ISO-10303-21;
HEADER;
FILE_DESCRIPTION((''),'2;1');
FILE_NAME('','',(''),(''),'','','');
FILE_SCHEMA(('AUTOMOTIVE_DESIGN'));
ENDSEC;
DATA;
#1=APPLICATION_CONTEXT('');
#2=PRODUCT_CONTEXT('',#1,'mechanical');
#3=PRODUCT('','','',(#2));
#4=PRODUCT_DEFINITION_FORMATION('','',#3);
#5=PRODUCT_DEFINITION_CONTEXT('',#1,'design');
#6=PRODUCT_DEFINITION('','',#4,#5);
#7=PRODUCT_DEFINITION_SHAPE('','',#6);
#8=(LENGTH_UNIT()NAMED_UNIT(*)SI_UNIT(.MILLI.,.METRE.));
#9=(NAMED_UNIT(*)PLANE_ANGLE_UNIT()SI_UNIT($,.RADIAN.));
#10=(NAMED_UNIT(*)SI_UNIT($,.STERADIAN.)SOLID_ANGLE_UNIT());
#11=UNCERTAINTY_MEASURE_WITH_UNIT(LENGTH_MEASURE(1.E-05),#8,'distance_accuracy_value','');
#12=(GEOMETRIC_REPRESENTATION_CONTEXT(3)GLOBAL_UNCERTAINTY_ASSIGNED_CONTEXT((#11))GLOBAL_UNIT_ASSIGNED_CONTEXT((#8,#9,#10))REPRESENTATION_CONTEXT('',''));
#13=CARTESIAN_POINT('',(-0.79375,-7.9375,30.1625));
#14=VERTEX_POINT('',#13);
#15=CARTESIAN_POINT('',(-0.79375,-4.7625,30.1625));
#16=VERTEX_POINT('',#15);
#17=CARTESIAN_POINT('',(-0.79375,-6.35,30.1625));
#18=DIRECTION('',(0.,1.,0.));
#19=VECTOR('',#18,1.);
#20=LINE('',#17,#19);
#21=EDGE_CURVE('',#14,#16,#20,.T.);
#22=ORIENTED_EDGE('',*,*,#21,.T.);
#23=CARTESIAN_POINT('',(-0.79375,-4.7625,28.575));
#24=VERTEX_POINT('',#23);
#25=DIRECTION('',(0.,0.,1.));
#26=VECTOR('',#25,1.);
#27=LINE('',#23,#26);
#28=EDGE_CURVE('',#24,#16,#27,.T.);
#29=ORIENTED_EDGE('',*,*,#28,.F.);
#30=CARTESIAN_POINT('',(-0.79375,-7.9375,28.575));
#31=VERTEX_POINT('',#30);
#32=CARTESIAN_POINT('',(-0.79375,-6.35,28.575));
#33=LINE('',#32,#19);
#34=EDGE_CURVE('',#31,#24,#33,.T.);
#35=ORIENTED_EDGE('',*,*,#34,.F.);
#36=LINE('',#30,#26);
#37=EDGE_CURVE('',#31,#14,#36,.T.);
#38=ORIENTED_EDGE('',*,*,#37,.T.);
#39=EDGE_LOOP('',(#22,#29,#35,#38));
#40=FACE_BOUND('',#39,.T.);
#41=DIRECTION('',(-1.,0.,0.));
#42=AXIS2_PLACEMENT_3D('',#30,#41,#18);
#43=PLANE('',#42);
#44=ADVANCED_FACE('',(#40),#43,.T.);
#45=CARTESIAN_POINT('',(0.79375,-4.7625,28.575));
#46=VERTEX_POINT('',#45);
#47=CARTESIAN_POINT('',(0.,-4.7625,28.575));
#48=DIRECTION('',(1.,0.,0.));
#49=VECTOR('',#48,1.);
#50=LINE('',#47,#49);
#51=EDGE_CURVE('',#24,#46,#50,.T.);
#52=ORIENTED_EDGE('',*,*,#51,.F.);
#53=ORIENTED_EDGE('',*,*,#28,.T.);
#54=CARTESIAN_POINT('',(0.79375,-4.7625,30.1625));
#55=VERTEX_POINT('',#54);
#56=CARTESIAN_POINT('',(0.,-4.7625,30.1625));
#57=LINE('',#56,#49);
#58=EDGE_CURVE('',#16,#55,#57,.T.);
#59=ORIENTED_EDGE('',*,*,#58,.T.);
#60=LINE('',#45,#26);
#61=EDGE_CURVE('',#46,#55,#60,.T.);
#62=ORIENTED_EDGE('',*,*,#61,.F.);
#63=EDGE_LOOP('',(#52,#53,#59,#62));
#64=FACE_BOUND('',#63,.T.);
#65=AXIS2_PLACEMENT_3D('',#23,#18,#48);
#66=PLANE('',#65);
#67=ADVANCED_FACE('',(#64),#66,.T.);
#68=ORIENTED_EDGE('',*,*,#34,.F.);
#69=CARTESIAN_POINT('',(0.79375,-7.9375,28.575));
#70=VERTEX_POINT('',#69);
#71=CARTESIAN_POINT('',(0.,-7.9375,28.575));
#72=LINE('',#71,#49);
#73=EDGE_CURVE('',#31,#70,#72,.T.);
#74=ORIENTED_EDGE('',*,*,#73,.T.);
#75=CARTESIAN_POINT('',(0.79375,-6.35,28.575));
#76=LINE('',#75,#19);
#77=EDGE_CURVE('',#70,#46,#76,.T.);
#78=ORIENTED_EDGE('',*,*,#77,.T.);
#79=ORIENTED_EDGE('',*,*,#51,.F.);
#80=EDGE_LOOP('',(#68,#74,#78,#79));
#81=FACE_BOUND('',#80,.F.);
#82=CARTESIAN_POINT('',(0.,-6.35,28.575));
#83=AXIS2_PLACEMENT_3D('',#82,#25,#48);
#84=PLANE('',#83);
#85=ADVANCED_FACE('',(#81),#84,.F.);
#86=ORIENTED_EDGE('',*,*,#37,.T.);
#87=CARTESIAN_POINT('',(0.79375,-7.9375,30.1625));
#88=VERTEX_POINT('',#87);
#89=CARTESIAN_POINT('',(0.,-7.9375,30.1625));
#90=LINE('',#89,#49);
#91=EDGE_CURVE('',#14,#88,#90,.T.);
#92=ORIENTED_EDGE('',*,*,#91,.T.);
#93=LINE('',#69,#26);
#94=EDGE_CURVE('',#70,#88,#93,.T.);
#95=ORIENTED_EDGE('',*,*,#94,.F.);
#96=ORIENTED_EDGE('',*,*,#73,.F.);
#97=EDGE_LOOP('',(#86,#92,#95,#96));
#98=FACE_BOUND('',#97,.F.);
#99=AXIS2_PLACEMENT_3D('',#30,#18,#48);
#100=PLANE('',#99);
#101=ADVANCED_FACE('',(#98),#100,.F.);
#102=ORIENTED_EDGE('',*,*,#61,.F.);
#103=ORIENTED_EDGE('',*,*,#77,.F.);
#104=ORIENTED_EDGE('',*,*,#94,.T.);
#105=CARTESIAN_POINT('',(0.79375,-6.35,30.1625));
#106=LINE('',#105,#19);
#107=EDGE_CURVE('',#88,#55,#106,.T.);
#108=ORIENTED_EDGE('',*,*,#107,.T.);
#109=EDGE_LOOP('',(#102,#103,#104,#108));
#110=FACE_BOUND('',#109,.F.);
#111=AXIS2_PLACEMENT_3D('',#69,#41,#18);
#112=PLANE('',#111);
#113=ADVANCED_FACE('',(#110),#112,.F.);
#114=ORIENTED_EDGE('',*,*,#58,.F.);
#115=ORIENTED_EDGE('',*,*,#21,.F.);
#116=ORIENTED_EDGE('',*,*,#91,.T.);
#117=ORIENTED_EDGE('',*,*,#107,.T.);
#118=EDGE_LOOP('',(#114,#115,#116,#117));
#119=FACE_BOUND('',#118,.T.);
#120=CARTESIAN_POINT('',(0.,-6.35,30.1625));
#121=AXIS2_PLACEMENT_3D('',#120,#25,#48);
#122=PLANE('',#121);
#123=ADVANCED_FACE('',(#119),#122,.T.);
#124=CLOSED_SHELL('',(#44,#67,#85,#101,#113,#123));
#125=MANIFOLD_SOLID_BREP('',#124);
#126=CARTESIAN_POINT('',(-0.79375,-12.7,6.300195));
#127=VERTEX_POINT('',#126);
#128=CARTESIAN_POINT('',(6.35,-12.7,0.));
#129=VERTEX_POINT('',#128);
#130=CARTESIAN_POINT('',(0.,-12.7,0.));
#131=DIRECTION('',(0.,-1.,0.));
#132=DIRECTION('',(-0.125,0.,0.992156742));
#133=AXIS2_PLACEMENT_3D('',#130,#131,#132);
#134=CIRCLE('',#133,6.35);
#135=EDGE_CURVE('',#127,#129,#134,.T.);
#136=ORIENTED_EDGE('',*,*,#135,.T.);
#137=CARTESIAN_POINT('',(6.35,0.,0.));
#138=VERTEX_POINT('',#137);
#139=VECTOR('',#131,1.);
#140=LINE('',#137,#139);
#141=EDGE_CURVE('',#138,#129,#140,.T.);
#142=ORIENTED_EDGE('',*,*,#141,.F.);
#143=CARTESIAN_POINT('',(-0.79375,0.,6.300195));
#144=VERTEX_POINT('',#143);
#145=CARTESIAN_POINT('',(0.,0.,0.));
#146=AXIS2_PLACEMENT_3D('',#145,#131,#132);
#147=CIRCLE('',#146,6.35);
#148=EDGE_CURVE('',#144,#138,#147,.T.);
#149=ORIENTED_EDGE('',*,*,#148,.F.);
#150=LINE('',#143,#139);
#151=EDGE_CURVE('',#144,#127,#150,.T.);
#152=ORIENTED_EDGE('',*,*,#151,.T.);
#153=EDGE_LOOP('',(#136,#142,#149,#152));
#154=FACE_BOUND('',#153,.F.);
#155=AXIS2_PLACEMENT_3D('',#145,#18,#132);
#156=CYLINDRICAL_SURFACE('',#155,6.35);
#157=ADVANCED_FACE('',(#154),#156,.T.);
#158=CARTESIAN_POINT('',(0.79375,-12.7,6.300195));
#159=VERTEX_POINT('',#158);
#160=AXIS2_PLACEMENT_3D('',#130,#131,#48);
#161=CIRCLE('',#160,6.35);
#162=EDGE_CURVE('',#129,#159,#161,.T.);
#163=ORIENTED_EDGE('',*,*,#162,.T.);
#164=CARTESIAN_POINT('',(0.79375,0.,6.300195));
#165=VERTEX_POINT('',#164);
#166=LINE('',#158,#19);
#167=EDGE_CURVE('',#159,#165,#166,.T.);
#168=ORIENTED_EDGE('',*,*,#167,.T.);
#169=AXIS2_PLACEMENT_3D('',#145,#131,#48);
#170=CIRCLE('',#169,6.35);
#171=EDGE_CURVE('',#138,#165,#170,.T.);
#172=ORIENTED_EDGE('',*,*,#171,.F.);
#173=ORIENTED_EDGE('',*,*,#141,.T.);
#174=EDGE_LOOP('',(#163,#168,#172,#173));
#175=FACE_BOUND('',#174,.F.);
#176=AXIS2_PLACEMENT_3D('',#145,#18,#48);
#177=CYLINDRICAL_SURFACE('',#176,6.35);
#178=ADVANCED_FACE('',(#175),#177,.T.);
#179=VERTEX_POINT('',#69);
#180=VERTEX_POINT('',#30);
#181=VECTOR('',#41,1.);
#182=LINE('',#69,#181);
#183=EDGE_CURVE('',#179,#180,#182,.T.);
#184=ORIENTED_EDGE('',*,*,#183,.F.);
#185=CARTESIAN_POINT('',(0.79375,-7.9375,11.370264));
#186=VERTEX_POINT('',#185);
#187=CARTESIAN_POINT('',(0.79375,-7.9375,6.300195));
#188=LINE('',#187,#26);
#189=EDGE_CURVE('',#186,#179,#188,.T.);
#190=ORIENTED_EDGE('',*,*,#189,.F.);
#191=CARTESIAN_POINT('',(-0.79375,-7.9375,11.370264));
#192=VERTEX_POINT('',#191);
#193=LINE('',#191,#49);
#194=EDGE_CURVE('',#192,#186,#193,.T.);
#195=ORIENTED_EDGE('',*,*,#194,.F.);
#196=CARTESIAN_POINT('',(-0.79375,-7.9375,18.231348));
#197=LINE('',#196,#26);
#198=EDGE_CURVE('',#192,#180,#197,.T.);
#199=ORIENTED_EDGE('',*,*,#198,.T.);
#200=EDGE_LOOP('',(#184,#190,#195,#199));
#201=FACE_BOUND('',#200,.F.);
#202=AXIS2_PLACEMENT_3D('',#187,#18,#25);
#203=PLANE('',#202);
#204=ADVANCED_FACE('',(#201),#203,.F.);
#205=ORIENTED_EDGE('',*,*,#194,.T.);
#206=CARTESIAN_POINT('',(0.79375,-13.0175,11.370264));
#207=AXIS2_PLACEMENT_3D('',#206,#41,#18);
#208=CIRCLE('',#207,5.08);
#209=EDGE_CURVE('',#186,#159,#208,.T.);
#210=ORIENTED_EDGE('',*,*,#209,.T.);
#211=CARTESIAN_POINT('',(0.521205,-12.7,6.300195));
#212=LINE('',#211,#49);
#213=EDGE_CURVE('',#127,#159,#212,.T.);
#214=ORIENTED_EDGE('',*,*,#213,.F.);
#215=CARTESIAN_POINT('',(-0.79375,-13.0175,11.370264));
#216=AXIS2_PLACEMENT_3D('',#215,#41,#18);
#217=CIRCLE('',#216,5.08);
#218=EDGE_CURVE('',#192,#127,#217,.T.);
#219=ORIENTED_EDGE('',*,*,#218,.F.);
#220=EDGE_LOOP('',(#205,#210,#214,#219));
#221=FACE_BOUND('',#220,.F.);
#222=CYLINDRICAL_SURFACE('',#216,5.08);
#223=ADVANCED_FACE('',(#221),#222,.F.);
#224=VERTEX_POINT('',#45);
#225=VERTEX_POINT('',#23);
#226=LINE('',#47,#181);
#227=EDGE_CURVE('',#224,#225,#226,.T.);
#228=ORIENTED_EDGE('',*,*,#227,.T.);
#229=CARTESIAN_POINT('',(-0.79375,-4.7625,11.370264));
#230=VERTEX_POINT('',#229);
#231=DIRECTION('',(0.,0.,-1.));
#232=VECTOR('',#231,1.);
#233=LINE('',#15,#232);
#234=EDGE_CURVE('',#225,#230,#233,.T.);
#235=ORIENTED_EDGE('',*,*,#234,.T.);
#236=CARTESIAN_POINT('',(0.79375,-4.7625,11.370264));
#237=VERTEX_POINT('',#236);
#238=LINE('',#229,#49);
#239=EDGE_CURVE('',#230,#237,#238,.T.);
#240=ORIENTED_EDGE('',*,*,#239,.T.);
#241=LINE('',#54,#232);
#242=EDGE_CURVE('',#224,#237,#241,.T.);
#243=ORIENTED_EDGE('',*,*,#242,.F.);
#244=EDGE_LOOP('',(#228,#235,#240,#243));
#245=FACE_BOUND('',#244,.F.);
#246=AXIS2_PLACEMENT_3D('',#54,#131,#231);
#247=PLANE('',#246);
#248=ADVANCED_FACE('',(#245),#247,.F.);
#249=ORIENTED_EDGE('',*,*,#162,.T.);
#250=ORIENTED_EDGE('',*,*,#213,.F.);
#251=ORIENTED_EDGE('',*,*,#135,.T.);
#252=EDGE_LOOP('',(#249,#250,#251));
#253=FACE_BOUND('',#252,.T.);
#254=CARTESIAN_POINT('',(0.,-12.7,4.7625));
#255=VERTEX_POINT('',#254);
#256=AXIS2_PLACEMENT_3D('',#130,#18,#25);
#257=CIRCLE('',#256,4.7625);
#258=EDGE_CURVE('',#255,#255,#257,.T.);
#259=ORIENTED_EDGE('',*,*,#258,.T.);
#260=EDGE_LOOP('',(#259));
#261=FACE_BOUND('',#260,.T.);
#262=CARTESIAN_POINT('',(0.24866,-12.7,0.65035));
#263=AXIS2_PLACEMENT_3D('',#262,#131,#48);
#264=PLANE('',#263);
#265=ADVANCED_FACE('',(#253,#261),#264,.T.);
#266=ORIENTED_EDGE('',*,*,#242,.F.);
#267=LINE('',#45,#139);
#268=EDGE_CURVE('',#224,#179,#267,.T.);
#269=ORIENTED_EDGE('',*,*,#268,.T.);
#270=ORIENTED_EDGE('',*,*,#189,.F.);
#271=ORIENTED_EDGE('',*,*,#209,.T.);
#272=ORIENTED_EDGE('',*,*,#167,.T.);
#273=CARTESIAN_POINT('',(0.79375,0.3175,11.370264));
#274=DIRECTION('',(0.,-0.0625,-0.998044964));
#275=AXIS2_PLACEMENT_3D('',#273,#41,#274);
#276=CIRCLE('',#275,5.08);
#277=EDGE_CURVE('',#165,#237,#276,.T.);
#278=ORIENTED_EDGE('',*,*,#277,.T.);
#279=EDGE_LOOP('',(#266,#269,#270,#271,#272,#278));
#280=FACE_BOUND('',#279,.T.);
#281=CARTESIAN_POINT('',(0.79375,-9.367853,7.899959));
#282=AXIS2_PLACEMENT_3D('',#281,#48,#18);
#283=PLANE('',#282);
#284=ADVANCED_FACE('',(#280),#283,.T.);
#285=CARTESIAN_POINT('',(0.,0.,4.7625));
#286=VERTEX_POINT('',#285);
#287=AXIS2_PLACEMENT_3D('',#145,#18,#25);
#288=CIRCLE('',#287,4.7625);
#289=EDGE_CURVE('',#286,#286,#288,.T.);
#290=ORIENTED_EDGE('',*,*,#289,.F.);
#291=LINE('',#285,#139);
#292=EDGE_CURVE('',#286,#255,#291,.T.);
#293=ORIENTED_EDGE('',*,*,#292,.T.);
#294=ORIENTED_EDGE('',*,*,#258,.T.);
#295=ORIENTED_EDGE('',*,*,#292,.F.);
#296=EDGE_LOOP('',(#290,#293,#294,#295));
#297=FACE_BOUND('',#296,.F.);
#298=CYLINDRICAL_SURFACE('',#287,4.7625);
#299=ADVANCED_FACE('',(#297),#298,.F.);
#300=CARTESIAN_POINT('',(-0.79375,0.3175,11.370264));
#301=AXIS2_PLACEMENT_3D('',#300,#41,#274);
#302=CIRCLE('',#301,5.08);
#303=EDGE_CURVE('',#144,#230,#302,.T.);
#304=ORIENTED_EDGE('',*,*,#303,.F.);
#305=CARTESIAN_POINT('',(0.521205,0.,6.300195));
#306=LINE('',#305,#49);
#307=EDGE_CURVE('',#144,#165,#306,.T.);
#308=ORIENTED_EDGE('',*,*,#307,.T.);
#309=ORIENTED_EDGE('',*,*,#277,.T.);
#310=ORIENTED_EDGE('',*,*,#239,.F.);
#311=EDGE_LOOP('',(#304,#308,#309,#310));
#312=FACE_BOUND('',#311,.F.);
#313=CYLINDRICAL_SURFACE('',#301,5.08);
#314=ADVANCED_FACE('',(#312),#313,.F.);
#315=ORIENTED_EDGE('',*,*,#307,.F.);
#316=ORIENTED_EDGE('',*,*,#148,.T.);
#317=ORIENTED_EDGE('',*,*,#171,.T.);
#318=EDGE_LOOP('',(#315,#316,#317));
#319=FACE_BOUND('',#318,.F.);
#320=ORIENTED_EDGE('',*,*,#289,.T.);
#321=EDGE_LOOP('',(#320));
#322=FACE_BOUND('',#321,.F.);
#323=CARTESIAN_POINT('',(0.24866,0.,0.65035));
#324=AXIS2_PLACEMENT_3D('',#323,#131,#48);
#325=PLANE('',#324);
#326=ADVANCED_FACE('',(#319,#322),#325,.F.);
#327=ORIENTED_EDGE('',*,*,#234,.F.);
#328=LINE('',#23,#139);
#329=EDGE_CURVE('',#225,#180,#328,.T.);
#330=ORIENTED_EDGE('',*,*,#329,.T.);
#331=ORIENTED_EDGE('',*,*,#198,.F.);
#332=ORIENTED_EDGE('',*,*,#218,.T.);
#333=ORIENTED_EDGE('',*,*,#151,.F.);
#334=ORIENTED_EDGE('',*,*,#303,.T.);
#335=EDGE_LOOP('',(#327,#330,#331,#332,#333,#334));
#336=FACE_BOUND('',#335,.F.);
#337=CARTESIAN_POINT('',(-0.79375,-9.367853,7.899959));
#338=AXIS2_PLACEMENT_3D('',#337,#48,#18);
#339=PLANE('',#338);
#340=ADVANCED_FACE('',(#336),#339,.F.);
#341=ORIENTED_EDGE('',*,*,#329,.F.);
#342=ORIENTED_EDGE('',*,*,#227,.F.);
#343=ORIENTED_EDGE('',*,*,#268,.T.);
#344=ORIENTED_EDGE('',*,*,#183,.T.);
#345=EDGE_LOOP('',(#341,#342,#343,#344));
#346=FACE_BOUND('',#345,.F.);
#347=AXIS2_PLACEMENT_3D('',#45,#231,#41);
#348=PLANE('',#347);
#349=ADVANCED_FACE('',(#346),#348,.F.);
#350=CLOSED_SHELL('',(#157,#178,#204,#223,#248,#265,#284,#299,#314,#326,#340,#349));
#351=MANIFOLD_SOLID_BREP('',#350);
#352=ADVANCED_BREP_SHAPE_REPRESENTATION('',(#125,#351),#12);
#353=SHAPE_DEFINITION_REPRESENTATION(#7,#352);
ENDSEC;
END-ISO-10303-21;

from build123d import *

# Parameters (mm, degrees)
F1_DEPTH    = 12.7
F3_DEPTH    = 25.4
F4_T1_DEPTH = 1.5875
F5_T1_DEPTH = 1.5875
F6_W        = 1.5875
F6_H        = 1.5875
F7_DEPTH    = 25.4
F8_W        = 1.5875
F8_H        = 3.175
F9_DEPTH    = 1.5875


# Not quite as in the source:
# - a fillet or chamfer that OpenCascade refuses, or shapes differently, is made with other operations: its cross-section is extruded or revolved along the edge and cut away or added


with BuildPart() as f1:
    # F0 (on Front) → F1 (new body)
    with BuildSketch(Plane.XZ):
        with BuildLine():
            Line((0.79375, 4.7625), (0, 4.7625))
            Line((0, 4.7625), (-0.79375, 4.7625))
            Line((-0.79375, 4.7625), (-0.79375, 6.3001953095))
            ThreePointArc((-0.79375, 6.3001953095), (-4.2001302063, -4.7625), (6.35, 0))
            ThreePointArc((6.35, 0), (4.7625, 4.2001302063), (0.79375, 6.3001953095))
            Line((0.79375, 6.3001953095), (0.79375, 4.7625))
        make_face()
        with BuildLine():
            ThreePointArc((0, 4.7625), (3.3675960454, 3.3675960454), (4.7625, 0))
            ThreePointArc((4.7625, 0), (-3.3675960454, -3.3675960454), (0, 4.7625))
        make_face(mode=Mode.SUBTRACT)
        with BuildLine():
            Line((-0.79375, 4.7625), (0, 4.7625))
            Line((0, 4.7625), (0.79375, 4.7625))
            Line((0.79375, 4.7625), (0.79375, 6.3001953095))
            ThreePointArc((0.79375, 6.3001953095), (0, 6.35), (-0.79375, 6.3001953095))
            Line((-0.79375, 6.3001953095), (-0.79375, 4.7625))
        make_face()
        with BuildLine():
            Line((-0.79375, 30.1625), (-0.79375, 6.3001953095))
            ThreePointArc((-0.79375, 6.3001953095), (0, 6.35), (0.79375, 6.3001953095))
            Line((0.79375, 6.3001953095), (0.79375, 30.1625))
            Line((0.79375, 30.1625), (-0.79375, 30.1625))
        make_face()
    extrude(amount=F1_DEPTH)

    # F2 (on face) → F3 (cut)
    with BuildSketch(Plane.YZ.offset(0.79375)):
        Polygon((-7.9375, 6.3001953095), (-7.9375, 30.1625), (-4.7625, 30.1625), (-4.7625, 6.3001953095), (8.4503721446, 6.3001953095), (8.4503721446, 42.4300841987), (-23.5275886953, 42.4300841987), (-23.5275886953, 6.3001953095), align=None)
    extrude(amount=-F3_DEPTH, mode=Mode.SUBTRACT)

    # F4: fillet of radius 5.08 on 1 edges, made by hand

    # F4_s2 → F4_t1 (join)
    with BuildSketch(Plane.YZ.offset(-0.79375)):
        with BuildLine():
            ThreePointArc((0, 6.3001953095), (-3.3851544532, 7.892225486), (-4.7625, 11.3702637262))
            Line((-4.7625, 11.3702637262), (-4.7625, 6.3001953095))
            Line((-4.7625, 6.3001953095), (0, 6.3001953095))
        make_face()
    extrude(amount=F4_T1_DEPTH)

    # F5: fillet of radius 5.08 on 1 edges, made by hand

    # F5_s2 → F5_t1 (join)
    with BuildSketch(Plane.YZ.offset(-0.79375)):
        with BuildLine():
            ThreePointArc((-7.9375, 11.3702637262), (-9.3148455468, 7.892225486), (-12.7, 6.3001953095))
            Line((-12.7, 6.3001953095), (-7.9375, 6.3001953095))
            Line((-7.9375, 6.3001953095), (-7.9375, 11.3702637262))
        make_face()
    extrude(amount=F5_T1_DEPTH)

    # F6 (on face) → F7 (cut)
    with BuildSketch(Plane(origin=(0, -4.7625, 0), x_dir=(-1, 0, 0), z_dir=(0, 1, 0))):
        with Locations((0, 29.36875)):
            Rectangle(F6_W, F6_H)
    extrude(amount=-F7_DEPTH, mode=Mode.SUBTRACT)


with BuildPart() as f9:
    # F8 (on face) → F9 (new body)
    with BuildSketch(Plane.XY.offset(28.575)):
        with Locations((0, -6.35)):
            Rectangle(F8_W, F8_H)
    extrude(amount=F9_DEPTH)


solid = Compound([f1.part, f9.part])
